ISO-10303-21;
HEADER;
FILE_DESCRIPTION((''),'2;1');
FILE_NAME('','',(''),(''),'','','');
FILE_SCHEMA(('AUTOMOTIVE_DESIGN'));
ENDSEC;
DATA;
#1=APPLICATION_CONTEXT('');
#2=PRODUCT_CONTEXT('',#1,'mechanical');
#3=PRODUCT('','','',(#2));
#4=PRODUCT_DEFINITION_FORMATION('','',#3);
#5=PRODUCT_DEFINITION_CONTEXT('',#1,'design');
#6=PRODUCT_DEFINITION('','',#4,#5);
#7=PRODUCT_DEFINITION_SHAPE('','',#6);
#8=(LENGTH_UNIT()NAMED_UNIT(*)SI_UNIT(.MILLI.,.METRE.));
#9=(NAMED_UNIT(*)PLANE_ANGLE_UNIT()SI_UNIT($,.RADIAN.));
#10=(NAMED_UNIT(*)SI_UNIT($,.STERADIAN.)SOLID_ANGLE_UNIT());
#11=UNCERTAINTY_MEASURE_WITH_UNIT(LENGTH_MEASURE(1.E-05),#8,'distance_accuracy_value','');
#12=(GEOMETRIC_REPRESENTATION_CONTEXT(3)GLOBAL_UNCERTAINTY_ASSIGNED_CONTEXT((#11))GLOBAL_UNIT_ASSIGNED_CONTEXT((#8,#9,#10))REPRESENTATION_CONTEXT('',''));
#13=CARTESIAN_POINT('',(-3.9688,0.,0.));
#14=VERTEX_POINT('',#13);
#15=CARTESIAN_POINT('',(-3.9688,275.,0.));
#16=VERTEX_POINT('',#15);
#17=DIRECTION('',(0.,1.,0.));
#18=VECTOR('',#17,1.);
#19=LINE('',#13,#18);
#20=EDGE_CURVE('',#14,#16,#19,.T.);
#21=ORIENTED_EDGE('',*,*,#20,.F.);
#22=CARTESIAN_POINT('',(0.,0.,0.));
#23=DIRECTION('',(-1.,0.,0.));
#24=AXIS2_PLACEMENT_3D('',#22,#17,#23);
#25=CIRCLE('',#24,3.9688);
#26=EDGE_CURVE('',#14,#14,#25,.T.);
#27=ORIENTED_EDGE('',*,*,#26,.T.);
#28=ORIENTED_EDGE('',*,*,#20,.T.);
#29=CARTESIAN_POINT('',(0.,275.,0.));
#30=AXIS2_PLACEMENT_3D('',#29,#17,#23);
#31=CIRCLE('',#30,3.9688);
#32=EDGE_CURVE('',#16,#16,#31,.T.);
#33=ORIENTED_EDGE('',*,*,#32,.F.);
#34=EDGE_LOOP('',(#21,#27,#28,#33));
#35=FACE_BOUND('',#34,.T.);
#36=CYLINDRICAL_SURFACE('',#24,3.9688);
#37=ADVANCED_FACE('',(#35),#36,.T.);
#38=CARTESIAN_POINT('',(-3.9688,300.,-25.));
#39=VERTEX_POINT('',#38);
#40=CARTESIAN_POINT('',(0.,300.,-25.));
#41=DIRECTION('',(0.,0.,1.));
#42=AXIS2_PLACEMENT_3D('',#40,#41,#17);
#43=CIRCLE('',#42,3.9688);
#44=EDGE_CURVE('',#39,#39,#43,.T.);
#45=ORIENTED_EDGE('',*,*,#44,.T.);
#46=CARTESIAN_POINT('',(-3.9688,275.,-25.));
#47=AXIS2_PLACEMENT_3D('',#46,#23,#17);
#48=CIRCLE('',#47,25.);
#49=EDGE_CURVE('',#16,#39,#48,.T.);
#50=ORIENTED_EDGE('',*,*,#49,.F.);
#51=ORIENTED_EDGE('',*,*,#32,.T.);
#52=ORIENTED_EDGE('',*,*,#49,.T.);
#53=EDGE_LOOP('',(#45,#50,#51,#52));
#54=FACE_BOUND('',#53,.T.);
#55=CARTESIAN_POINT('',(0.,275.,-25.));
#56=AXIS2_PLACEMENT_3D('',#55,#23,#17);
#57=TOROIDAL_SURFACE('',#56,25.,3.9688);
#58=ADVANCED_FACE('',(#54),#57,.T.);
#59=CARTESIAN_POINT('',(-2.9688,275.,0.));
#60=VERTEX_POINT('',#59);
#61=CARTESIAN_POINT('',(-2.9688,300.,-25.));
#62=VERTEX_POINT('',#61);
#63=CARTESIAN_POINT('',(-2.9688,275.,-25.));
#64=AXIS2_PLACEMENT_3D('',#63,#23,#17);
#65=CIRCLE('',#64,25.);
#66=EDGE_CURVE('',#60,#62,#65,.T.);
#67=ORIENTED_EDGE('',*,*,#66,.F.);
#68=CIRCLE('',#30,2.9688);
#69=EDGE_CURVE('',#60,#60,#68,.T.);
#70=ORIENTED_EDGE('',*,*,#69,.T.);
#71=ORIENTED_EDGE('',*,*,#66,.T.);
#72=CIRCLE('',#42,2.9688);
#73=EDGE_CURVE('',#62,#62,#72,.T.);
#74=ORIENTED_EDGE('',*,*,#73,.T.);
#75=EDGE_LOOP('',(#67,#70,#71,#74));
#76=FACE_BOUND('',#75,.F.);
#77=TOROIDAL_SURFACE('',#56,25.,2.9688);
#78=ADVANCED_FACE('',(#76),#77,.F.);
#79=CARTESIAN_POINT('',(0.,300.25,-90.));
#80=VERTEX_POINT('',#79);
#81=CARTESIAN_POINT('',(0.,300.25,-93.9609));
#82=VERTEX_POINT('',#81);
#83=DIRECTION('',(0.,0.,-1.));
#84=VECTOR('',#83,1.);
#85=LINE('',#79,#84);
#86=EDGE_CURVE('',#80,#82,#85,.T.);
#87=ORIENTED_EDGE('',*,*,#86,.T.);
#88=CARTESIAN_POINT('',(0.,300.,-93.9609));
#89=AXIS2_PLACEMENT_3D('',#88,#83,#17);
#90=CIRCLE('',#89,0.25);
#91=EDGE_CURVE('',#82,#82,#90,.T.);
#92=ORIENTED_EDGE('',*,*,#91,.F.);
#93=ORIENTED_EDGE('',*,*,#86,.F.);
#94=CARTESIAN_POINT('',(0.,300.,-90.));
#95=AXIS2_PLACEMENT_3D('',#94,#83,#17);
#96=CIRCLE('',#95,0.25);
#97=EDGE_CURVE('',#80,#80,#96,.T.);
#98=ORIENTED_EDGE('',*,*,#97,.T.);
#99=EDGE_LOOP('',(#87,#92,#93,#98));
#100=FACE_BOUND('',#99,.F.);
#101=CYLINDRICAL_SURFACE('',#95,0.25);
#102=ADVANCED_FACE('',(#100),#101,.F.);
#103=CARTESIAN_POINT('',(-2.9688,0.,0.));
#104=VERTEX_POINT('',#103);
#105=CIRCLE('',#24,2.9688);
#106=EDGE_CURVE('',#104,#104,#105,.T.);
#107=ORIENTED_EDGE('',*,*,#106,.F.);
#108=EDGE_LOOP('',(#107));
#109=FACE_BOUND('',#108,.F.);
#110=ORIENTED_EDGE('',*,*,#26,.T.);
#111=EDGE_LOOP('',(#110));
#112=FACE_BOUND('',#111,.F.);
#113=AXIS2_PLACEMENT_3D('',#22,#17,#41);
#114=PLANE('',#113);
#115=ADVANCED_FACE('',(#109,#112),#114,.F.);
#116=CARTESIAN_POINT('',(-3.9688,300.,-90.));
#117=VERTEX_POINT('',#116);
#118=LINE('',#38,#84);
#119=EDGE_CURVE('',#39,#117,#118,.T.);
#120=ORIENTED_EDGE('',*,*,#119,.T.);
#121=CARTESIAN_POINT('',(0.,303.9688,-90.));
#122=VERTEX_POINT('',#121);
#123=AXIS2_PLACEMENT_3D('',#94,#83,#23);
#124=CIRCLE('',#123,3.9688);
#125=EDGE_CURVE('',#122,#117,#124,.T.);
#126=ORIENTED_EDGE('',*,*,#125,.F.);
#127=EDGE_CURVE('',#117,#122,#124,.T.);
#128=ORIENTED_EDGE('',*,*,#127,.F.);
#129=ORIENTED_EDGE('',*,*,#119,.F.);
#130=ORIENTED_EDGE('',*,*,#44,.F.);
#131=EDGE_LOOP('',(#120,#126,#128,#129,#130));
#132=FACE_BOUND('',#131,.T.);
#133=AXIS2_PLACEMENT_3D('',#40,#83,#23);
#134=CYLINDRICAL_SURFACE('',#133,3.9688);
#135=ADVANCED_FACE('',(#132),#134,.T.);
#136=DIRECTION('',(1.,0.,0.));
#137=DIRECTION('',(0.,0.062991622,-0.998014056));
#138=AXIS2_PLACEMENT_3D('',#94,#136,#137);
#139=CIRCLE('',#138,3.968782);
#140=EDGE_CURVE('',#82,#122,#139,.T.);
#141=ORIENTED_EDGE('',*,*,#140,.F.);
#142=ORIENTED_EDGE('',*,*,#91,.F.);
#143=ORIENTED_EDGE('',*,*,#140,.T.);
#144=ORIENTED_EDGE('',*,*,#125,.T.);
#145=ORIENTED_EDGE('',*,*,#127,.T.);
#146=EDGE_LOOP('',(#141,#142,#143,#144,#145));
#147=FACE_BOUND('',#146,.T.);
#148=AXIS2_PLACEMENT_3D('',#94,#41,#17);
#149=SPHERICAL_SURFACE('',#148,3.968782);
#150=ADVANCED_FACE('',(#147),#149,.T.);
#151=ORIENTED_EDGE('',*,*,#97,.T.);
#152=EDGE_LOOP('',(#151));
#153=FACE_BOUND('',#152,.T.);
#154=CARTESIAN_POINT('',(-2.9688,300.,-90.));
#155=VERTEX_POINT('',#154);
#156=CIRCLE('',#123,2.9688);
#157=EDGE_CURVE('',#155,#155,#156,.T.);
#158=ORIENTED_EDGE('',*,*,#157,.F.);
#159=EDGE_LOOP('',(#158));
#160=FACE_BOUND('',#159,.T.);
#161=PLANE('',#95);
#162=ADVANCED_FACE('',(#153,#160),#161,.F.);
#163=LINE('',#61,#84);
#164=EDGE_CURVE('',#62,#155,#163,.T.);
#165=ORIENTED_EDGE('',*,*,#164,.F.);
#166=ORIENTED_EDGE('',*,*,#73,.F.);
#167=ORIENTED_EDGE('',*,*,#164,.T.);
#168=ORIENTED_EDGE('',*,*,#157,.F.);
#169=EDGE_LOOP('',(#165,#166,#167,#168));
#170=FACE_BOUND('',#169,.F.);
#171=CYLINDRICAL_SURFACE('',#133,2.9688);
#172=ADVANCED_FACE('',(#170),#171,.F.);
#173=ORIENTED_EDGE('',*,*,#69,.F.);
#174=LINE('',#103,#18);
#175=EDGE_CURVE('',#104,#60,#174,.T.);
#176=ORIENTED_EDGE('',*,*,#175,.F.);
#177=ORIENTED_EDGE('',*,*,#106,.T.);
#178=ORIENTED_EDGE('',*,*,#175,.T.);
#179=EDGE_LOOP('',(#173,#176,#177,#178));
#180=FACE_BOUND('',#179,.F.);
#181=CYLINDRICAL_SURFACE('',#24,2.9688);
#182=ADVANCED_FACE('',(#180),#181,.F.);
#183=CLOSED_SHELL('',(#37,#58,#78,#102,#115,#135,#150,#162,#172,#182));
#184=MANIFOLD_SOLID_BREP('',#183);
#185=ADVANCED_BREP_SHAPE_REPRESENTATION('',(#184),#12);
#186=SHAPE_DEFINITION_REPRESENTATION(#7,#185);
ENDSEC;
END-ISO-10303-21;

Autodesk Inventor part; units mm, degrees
ref_plane "YZ Plane" through (0, 0, 0) normal (1, 0, 0) x (0, 1, 0)
ref_plane "XZ Plane" through (0, 0, 0) normal (0, 1, 0) x (-1, 0, 0)
ref_plane "XY Plane" through (0, 0, 0) normal (0, 0, 1) x (1, 0, 0)
sketch "Sketch1" plane through (0, 0, 0) normal (0, 1, 0) x (-1, 0, 0)
  circle A0 centre (0, 0) radius 3.9688
  circle A1 centre (0, 0) radius 2.9688
  dimension "d0" = 7.9375
  dimension "d4" = 1
sketch "Sketch2" plane through (0, 0, 0) normal (1, 0, 0) x (0, 1, 0)
  line L0 (0, 0) -> (275, 0)
  line L1 (300, -25) -> (300, -90)
  arc A0 (300, -25) -> (275, 0) centre (275, -25) ccw
  point P0 (300, 0)
  dimension "d1" = 300
  dimension "d2" = 90
  dimension "d3" = 25
sweep "Sweep1" add profiles "Sketch1" path "Sketch2"
sketch "Sketch3" plane through (0, 0, 0) normal (1, 0, 0) x (0, 1, 0)
  line L0 (296.0312, -90) -> (303.9688, -90) projected
  arc A0 (300.25, -93.9609) -> (299.75, -93.9609) centre (300, -90) ccw
  line L1 (300, -90) -> (300, -93.9688)
  line L2 (300.25, -90) -> (300.25, -93.9609)
  line L3 (299.75, -90) -> (299.75, -93.9609)
  point P0 (0, 0)
  point P1 (300.25, -96.7948)
  point P2 (299.75, -96.7948)
  dimension "d7" = 0.25
revolve "Revolution1" add sketch "Sketch3" angle 360 about axis through (0, 300, -90) along (0, 0, -1) contours A0 L2 L0
properties part number "Pitot Tube" material "Stainless Steel"
